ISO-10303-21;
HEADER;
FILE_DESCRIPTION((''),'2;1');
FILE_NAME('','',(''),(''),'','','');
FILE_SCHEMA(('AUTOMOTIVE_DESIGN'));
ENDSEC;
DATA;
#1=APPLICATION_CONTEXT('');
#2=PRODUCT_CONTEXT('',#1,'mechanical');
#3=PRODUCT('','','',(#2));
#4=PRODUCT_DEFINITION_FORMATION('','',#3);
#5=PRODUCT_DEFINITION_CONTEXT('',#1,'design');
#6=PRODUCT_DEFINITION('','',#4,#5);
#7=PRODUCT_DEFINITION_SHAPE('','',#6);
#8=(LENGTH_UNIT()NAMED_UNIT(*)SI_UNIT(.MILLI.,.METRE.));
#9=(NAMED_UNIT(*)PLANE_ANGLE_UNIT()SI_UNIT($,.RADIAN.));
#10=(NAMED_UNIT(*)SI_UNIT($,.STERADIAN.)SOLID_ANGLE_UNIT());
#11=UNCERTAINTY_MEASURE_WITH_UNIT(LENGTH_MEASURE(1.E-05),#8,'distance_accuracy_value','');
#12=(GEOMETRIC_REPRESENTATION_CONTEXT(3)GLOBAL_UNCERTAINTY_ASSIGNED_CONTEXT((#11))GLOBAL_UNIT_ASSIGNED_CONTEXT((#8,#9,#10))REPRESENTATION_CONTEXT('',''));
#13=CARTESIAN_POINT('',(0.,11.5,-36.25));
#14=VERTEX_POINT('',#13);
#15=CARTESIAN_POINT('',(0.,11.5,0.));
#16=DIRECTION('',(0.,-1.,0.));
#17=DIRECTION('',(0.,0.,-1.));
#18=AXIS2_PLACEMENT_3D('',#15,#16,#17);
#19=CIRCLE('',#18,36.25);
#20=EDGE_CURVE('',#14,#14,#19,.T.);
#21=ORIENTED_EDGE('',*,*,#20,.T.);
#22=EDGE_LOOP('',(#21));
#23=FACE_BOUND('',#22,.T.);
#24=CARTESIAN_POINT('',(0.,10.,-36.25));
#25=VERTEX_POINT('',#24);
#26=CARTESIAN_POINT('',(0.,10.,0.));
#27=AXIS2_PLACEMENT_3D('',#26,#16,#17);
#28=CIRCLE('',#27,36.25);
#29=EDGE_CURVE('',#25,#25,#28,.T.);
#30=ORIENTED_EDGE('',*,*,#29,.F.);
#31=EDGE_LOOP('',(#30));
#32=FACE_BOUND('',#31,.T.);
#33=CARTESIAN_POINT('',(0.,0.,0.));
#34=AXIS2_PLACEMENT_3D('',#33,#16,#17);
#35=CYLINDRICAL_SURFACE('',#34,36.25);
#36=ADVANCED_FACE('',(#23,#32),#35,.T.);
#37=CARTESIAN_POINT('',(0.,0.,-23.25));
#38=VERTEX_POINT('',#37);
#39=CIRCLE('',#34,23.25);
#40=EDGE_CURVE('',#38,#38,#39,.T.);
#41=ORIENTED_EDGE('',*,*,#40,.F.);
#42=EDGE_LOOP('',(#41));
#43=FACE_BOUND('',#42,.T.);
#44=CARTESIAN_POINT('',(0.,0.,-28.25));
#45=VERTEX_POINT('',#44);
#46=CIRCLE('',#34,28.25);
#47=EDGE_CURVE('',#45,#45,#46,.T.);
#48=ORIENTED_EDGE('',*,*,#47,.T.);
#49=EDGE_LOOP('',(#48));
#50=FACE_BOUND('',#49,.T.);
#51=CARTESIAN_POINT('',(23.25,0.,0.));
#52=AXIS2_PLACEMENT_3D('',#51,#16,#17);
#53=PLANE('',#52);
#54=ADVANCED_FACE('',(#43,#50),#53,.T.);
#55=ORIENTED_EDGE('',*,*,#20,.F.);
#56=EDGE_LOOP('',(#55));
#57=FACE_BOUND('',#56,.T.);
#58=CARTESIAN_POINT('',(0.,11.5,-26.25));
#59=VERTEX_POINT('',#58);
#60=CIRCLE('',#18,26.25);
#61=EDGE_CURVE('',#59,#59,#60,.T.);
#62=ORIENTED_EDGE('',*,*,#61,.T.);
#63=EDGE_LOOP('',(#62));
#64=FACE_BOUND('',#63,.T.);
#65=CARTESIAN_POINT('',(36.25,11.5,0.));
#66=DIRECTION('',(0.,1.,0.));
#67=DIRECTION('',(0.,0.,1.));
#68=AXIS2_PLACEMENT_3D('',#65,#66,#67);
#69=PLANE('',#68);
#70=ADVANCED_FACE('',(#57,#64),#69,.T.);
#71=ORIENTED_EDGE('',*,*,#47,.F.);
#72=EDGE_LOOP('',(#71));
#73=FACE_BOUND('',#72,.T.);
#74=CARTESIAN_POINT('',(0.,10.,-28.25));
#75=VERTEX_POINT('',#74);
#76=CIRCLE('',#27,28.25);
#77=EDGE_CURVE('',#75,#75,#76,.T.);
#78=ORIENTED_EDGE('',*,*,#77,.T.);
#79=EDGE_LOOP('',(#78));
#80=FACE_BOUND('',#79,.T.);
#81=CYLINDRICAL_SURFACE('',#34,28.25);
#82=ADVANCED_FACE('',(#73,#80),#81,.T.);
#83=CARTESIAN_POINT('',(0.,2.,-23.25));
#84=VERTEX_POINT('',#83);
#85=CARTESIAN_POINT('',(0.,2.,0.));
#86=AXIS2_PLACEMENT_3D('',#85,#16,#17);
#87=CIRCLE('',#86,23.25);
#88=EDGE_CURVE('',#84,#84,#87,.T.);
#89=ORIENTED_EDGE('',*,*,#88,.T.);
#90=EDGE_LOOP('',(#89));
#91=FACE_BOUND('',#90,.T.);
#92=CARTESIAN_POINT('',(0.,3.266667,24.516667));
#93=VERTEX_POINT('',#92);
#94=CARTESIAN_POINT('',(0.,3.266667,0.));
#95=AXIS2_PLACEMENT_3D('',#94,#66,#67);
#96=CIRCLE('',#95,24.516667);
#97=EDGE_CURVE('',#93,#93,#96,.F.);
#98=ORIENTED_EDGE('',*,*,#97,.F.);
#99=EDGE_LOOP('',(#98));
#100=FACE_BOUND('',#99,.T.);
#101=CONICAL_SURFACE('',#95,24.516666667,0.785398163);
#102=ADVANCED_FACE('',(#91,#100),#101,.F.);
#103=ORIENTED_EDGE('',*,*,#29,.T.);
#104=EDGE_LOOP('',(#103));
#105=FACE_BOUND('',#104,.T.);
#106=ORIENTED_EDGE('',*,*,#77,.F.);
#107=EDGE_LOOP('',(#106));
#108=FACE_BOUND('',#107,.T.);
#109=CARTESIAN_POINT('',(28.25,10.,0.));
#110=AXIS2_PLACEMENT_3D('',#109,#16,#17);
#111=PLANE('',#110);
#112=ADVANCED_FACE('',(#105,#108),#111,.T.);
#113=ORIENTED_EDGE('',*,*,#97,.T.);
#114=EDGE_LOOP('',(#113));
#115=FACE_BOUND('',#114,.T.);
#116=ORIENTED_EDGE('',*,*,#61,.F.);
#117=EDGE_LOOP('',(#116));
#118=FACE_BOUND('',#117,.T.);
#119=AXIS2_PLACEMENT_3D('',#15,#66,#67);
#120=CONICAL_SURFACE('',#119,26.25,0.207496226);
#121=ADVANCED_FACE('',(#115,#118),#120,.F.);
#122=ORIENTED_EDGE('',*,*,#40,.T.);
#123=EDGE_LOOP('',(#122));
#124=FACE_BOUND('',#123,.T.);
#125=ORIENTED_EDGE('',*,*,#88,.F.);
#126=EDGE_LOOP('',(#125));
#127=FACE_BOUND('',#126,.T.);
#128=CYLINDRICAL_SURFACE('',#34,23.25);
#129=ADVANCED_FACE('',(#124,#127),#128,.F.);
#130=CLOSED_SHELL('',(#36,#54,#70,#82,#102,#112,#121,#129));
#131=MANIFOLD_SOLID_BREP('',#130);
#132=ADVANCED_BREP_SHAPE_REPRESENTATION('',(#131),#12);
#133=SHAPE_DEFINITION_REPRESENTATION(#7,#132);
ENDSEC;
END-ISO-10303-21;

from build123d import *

# Parameters (mm, degrees)
CHAMFER1_SIZE2 = 1
CHAMFER1_SIZE  = 1.294432523


with BuildPart() as part:
    # Sketch2 → Revolve1 (revolve)
    with BuildSketch(Plane.XY, mode=Mode.PRIVATE) as revolve1_sk:
        Polygon((28.25, 0), (28.25, 10), (36.25, 10), (36.25, 11.5), (26.25, 11.5), (24.25, 2), (23.25, 2), (23.25, 0), align=None)
    revolve(revolve1_sk.sketch.rotate(Axis((0, 0, 0), (0, 1, 0)), 90), axis=Axis((0, 0, 0), (0, 1, 0)))

    # Chamfer1
    chamfer1_edges = [part.edges().sort_by_distance(p)[0] for p in [
        (0, 2, 24.25),
    ]]
    chamfer1_side = [part.faces().sort_by_distance(p)[0] for p in [
        (0, 2.019570996, 24.25412021),
    ]]
    chamfer(chamfer1_edges, length=CHAMFER1_SIZE - 0.0001, length2=CHAMFER1_SIZE2 - 0.0001, reference=chamfer1_side[0])  # a hair under: the kernel refuses the full size


solid = part.part
